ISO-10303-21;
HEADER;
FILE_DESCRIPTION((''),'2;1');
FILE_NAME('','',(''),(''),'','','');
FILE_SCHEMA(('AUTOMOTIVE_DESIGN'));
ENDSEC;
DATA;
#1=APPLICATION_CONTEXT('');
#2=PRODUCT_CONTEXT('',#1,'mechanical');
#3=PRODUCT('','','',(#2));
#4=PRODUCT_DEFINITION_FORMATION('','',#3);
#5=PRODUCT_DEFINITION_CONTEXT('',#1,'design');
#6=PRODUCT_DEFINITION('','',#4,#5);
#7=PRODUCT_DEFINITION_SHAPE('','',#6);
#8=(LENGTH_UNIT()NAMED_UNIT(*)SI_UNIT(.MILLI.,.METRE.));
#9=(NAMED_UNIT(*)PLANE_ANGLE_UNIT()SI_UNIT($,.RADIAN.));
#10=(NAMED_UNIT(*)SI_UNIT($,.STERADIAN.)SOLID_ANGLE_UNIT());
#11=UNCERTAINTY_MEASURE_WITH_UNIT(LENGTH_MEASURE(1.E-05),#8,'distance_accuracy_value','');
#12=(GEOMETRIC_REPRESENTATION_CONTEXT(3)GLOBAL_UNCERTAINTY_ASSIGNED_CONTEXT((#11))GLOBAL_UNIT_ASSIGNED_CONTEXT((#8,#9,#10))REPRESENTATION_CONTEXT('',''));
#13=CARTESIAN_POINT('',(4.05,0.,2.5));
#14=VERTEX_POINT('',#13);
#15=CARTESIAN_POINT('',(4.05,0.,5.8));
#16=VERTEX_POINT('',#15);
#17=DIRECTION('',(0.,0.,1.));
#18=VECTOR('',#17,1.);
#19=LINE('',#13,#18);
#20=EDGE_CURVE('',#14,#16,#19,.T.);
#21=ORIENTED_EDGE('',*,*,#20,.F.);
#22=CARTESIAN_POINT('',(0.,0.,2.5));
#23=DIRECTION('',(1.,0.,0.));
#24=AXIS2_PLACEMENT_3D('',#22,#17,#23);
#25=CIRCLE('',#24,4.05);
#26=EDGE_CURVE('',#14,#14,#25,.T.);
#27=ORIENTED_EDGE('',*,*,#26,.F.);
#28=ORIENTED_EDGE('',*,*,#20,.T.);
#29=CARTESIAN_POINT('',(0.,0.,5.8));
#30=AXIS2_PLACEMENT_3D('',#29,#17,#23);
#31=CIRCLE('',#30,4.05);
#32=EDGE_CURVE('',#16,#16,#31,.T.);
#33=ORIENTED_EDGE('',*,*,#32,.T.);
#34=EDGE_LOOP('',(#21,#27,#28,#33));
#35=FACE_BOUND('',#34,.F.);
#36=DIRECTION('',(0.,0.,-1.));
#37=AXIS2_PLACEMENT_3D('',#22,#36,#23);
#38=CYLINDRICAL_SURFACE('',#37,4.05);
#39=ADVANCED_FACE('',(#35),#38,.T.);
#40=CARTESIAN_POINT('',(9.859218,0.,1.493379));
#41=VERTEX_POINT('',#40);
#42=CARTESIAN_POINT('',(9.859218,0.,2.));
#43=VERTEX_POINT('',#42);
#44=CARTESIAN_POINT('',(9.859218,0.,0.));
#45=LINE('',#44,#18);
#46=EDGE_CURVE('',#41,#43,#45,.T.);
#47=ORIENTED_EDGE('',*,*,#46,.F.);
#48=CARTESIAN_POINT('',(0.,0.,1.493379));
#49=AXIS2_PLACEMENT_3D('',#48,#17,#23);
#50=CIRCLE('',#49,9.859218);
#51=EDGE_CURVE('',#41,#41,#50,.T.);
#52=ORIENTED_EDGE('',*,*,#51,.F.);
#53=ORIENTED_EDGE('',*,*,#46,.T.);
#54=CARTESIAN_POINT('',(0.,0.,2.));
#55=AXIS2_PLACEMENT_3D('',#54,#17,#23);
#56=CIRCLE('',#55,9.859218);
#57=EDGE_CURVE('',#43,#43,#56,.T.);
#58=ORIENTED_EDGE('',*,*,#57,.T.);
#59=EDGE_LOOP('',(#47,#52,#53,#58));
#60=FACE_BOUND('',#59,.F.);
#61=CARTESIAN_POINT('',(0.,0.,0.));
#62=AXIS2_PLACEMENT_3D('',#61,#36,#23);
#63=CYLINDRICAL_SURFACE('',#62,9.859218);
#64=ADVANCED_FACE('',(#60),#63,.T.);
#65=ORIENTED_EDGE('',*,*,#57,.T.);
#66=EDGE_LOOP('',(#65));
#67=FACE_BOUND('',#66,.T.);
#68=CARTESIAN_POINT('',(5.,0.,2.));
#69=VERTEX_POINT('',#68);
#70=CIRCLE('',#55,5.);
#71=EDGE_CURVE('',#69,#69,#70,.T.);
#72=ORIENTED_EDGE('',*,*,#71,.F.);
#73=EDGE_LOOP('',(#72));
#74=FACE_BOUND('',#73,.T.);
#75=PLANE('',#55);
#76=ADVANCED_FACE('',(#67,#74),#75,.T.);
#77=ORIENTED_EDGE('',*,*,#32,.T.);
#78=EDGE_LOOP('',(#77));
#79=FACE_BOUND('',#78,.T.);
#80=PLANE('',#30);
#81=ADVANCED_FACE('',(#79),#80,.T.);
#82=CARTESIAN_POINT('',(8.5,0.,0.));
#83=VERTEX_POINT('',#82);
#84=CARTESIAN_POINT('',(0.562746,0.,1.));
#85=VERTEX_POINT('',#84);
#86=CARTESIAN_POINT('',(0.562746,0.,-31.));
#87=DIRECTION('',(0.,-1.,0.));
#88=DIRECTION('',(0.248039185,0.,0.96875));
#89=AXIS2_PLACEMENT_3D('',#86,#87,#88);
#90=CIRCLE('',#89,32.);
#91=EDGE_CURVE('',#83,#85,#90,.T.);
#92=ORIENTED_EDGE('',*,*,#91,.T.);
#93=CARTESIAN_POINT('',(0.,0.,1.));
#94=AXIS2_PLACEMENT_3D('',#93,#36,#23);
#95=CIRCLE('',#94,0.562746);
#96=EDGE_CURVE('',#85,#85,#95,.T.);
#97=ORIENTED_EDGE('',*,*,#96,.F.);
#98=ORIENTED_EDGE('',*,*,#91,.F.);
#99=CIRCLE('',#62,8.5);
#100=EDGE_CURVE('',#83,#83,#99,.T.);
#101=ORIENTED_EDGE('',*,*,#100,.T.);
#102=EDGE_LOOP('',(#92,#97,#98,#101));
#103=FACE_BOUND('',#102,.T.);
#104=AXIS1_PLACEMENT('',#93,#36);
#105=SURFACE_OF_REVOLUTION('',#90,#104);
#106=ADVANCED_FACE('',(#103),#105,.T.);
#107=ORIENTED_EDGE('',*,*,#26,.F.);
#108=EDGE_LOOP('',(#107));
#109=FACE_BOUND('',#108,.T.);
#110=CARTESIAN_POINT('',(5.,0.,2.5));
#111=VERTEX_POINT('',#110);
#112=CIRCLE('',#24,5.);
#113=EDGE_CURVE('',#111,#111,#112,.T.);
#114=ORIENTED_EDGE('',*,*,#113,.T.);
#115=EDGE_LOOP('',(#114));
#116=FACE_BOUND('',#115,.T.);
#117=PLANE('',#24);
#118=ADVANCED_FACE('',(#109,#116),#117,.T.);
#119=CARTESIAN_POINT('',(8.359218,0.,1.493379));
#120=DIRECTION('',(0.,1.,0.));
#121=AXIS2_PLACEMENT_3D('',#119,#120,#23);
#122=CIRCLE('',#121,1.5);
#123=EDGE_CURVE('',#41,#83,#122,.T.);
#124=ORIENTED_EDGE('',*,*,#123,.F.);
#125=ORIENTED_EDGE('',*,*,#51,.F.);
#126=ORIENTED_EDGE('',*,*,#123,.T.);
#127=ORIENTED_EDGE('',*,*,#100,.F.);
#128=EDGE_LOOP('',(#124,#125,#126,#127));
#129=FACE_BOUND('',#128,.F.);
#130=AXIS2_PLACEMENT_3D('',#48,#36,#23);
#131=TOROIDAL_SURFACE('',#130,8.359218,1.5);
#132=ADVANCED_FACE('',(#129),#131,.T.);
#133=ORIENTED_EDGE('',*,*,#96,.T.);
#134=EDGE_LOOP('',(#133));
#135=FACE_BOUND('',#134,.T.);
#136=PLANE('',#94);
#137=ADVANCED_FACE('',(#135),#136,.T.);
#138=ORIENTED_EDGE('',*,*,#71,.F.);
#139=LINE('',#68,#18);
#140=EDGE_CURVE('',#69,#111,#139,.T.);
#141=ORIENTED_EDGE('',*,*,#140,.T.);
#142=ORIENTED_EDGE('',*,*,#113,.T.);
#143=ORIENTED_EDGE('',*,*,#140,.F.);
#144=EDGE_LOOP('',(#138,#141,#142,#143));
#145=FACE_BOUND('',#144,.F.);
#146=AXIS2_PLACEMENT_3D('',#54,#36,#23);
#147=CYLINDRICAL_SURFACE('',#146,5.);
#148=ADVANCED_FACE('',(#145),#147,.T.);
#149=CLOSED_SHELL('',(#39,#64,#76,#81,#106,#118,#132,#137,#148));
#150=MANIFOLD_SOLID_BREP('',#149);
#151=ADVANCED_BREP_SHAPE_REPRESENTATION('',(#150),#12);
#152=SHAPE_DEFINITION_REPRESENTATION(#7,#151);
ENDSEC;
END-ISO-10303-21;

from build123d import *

# Parameters (mm, degrees)
F0_R     = 9.8592181747
F1_DEPTH = 2
F2_R     = 5
F3_DEPTH = 0.5
F4_R     = 4.05
F5_DEPTH = 3.3
F6_R     = 8.5
F7_DEPTH = 1


# Not quite as in the source:
# - a fillet or chamfer that OpenCascade refuses, or shapes differently, is made with other operations: its cross-section is extruded or revolved along the edge and cut away or added


with BuildPart() as f1:
    # F0 (on Top) → F1 (new body)
    with BuildSketch(Plane.XY):
        Circle(F0_R)
    extrude(amount=F1_DEPTH)

    # F2 (on face) → F3 (join)
    with BuildSketch(Plane.XY.offset(2)):
        Circle(F2_R)
    extrude(amount=F3_DEPTH)

    # F4 (on face) → F5 (join)
    with BuildSketch(Plane.XY.offset(2.5)):
        Circle(F4_R)
    extrude(amount=F5_DEPTH)

    # F6 (on face) → F7 (cut)
    with BuildSketch(Plane(origin=(0, 0, 0), x_dir=(1, 0, 0), z_dir=(0, 0, -1))):
        Circle(F6_R)
    extrude(amount=-F7_DEPTH, mode=Mode.SUBTRACT)

    # F8: fillet of radius 32 on 1 edges, made by hand

    # F8_s1 → F8_t2 (revolve)
    with BuildSketch(Plane.XZ):
        with BuildLine():
            ThreePointArc((8.5, 0), (4.5627460668, 0.7490157328), (0.5627460668, 1))
            Line((0.5627460668, 1), (8.5, 1))
            Line((8.5, 1), (8.5, 0))
        make_face()
    revolve(axis=Axis((0, 0, 1), (0, 0, -1)))

    # F9: fillet of radius 1.5 on 1 edges, made by hand

    # F9_s1 → F9_t2 (revolve, cut)
    with BuildSketch(Plane.XZ):
        with BuildLine():
            ThreePointArc((9.8592181747, 1.4933788795), (9.4685361494, 0.4837187233), (8.5, 0))
            Line((8.5, 0), (9.8592181747, 0))
            Line((9.8592181747, 0), (9.8592181747, 1.4933788795))
        make_face()
    revolve(axis=Axis((0, 0, 0), (0, 0, 1)), mode=Mode.SUBTRACT)


solid = f1.part
